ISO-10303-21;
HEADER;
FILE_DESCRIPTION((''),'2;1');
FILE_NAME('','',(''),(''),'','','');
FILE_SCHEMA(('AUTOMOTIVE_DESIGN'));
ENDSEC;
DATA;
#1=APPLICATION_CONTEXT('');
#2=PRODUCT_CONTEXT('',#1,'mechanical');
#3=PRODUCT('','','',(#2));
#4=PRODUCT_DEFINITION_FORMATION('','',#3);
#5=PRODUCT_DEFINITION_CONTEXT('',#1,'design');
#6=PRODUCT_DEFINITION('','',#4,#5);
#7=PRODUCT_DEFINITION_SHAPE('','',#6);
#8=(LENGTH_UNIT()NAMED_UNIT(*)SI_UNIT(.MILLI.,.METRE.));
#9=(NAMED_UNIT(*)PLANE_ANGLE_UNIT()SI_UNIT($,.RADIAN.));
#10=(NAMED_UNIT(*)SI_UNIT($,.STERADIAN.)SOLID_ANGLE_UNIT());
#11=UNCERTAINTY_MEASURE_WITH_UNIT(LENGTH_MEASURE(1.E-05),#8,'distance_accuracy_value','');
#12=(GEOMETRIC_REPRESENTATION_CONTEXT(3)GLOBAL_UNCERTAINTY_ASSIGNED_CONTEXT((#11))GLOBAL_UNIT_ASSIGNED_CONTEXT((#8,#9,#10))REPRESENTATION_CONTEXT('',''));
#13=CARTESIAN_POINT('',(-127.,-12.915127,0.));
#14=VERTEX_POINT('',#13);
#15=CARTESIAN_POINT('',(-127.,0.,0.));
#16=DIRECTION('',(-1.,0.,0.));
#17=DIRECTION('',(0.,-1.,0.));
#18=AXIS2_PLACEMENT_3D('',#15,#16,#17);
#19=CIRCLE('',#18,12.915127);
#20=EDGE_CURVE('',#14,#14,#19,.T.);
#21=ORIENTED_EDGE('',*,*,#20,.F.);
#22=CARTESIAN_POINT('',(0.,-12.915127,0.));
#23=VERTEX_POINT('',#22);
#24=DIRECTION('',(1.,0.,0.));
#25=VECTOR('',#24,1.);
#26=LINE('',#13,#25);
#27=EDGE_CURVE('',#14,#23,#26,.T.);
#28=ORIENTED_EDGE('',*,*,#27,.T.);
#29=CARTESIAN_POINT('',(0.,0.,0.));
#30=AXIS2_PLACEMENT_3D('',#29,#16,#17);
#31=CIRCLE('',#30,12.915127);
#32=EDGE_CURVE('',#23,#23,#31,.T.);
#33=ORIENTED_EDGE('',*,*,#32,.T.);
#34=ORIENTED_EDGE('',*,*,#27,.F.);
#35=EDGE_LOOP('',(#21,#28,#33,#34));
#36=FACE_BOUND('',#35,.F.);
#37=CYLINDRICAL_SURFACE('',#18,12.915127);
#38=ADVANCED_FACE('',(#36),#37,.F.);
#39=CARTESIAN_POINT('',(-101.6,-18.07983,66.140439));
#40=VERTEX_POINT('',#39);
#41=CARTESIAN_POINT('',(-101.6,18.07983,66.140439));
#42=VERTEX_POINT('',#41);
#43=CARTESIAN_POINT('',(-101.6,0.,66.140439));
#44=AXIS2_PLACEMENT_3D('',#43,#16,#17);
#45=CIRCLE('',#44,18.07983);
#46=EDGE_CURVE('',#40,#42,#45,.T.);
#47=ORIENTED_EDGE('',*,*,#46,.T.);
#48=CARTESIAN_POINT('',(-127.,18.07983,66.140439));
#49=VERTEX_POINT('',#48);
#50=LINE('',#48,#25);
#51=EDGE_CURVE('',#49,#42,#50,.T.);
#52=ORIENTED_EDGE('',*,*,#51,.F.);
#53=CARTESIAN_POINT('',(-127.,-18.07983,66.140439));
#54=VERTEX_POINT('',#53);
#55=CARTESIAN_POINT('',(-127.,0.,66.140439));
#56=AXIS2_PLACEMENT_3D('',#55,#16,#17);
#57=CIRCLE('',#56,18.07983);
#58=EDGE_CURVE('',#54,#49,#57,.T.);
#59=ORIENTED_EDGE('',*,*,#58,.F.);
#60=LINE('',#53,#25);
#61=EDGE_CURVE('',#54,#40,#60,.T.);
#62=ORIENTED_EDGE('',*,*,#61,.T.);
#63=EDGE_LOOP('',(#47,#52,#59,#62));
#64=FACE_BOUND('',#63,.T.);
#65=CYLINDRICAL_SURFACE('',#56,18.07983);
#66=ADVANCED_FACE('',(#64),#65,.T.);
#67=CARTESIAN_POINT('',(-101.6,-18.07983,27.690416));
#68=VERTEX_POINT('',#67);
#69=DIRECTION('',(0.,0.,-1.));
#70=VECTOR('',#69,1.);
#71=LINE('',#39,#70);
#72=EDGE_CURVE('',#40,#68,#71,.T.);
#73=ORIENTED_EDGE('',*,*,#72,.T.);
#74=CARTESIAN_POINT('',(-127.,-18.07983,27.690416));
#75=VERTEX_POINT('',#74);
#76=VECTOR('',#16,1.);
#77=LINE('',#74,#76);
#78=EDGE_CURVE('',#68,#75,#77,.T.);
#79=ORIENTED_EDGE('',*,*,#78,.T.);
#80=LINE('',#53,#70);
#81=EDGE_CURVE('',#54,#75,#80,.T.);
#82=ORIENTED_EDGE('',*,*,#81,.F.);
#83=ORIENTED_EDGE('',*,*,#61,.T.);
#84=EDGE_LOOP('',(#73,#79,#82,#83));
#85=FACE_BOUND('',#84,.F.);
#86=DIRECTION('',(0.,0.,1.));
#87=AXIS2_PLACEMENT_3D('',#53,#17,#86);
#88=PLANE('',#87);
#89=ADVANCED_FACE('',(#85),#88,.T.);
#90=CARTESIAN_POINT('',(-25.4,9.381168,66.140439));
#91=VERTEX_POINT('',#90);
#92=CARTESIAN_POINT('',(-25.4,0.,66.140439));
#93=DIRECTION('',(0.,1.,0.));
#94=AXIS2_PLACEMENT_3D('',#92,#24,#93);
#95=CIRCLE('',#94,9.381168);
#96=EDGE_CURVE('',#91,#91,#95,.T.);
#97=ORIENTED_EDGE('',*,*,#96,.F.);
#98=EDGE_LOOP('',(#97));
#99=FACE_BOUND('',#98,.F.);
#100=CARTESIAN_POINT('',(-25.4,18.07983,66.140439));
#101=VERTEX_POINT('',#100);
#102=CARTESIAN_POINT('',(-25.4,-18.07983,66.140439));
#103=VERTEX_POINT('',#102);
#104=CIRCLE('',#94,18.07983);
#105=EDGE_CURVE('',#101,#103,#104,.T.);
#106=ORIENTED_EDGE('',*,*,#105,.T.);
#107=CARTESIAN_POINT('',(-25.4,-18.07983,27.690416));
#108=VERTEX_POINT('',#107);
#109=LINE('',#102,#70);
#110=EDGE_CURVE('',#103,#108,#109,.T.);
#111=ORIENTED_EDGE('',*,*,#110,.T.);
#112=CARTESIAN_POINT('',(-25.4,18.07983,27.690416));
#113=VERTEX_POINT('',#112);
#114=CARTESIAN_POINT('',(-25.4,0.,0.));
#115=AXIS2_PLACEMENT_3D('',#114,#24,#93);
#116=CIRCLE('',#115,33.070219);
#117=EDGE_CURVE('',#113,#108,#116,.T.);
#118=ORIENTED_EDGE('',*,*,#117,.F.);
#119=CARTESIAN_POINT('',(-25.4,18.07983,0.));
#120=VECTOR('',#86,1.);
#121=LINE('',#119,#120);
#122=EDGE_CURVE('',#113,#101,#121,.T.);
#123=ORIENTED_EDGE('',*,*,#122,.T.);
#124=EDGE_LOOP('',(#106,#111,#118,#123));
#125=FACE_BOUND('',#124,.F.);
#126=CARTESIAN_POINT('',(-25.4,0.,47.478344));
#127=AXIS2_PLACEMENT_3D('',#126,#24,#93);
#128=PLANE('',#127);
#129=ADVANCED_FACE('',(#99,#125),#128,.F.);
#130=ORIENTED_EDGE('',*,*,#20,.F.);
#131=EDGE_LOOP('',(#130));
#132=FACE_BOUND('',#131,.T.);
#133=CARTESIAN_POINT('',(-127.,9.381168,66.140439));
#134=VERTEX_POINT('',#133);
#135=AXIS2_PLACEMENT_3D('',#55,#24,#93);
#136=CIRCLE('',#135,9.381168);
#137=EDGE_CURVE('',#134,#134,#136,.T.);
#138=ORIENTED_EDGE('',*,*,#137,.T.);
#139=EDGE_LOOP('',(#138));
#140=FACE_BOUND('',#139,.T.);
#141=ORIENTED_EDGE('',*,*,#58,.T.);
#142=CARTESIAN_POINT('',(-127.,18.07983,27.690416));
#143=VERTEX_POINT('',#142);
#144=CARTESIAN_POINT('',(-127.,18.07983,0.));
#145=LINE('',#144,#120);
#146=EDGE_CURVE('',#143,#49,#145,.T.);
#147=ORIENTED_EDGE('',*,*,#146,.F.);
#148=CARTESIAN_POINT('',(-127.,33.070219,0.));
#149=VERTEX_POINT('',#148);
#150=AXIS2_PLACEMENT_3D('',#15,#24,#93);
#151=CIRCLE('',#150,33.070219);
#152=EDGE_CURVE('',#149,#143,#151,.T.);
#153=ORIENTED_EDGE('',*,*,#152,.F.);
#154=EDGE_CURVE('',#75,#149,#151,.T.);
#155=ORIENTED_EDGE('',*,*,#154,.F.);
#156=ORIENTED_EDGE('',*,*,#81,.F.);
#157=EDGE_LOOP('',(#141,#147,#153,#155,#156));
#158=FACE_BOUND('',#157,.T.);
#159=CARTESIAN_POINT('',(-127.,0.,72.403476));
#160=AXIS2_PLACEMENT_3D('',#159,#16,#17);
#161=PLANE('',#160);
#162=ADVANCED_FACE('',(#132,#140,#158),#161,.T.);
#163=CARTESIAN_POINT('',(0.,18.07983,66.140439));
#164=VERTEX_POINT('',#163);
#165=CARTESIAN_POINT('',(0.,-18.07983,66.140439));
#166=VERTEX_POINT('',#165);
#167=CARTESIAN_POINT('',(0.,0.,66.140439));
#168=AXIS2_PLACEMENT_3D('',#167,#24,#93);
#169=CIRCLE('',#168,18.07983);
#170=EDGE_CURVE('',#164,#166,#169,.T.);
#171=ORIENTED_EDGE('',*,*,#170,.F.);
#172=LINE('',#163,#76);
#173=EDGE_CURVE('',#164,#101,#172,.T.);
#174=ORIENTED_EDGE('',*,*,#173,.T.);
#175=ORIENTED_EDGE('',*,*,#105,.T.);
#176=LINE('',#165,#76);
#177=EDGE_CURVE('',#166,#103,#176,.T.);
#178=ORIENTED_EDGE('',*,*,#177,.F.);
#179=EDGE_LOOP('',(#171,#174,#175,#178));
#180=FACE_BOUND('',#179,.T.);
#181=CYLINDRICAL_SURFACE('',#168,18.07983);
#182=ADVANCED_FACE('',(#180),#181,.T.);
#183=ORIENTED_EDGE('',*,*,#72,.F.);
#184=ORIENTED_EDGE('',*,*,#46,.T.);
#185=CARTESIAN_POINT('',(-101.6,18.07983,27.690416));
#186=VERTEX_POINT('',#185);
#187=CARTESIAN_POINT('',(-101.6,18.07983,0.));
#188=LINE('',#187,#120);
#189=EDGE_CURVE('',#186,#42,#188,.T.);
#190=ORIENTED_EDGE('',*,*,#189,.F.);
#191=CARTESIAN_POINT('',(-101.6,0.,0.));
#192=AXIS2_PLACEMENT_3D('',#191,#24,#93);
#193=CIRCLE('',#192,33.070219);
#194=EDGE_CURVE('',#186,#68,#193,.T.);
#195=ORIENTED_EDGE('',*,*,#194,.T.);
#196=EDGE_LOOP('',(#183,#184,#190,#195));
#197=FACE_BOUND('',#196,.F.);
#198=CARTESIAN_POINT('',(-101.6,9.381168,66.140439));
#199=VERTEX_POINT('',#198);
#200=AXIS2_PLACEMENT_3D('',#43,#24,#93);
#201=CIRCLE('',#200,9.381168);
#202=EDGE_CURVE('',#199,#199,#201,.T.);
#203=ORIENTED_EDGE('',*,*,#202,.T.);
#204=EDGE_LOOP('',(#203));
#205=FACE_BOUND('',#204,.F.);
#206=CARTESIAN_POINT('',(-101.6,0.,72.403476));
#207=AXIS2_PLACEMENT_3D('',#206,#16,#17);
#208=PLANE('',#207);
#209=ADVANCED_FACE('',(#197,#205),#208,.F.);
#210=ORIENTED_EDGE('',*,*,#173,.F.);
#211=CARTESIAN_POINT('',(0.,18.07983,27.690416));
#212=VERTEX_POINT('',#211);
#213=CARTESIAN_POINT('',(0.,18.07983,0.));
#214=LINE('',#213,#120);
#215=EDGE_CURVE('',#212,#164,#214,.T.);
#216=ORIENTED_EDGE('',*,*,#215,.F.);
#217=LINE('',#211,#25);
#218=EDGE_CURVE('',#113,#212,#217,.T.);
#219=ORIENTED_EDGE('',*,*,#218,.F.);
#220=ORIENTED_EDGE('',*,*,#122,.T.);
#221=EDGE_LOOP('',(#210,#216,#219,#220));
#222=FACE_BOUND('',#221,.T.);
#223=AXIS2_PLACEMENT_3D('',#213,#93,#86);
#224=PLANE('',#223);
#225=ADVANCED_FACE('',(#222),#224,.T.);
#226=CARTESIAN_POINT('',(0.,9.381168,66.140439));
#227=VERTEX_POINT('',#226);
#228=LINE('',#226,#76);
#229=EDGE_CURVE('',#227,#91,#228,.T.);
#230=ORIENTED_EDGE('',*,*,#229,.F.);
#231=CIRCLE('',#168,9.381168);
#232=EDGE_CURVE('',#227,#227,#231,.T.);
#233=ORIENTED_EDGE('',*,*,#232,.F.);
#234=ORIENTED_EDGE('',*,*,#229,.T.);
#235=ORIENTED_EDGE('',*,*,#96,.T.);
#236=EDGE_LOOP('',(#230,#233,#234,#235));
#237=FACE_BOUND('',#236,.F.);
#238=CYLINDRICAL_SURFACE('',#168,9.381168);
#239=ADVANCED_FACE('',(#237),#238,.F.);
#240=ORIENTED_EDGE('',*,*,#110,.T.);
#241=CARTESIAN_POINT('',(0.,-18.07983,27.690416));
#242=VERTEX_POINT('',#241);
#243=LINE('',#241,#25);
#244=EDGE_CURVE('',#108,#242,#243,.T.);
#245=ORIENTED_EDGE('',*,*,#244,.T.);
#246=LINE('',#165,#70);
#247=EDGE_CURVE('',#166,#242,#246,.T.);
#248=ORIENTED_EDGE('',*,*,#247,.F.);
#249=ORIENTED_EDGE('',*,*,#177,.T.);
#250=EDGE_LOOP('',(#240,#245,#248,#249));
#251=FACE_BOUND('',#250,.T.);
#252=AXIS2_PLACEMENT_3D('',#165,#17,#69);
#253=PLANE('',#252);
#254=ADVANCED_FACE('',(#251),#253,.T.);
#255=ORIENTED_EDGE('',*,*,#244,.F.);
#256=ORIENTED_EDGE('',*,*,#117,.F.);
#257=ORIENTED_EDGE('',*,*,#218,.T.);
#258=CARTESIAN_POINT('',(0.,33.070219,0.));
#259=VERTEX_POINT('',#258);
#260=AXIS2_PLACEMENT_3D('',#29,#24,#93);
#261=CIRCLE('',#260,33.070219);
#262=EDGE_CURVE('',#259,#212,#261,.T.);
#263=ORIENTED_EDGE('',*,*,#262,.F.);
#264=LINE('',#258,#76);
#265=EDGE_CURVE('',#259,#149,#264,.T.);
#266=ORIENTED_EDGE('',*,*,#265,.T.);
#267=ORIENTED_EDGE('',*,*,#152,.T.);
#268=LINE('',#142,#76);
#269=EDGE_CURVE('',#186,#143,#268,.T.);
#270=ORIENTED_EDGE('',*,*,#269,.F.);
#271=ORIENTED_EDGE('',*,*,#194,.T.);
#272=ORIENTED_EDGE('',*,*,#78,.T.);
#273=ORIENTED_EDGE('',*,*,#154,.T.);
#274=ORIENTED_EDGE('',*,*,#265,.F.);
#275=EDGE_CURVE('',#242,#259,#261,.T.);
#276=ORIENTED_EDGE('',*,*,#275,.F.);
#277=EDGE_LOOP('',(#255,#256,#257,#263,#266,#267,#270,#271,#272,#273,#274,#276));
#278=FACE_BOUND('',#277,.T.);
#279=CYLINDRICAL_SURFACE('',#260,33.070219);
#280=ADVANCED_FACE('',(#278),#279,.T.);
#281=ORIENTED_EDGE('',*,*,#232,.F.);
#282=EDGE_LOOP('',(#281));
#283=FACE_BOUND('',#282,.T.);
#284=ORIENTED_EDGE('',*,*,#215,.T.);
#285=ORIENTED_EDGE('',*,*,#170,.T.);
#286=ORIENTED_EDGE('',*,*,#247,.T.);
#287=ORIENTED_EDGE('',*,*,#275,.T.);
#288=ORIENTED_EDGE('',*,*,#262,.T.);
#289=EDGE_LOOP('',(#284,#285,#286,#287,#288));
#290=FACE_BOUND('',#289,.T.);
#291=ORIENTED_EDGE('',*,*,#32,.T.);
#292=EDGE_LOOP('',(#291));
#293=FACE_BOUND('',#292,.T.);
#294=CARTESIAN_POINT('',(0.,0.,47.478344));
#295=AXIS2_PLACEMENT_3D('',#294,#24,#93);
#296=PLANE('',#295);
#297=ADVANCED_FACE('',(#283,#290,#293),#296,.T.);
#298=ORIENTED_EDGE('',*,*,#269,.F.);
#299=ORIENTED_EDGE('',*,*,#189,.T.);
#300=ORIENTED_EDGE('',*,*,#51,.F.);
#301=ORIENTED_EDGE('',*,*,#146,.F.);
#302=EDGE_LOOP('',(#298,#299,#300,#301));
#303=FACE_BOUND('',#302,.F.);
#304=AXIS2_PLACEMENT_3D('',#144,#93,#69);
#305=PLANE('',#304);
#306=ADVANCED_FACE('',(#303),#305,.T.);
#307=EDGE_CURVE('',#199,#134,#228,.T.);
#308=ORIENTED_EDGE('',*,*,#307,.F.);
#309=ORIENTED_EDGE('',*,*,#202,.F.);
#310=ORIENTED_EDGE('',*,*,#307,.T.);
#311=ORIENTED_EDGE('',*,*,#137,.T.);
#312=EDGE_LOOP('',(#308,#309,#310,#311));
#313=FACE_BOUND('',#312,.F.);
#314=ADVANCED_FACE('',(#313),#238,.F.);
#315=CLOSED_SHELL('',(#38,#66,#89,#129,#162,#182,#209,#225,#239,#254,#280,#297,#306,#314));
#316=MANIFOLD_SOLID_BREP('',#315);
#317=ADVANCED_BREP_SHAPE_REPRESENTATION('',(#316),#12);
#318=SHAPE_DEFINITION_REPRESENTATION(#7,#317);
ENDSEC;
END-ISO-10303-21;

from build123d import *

# Parameters (mm, degrees)
F0_R      = 33.0702193876
F1_DEPTH  = 63.5
F3_DEPTH  = 25.4
F7_DEPTH  = 25.4
F8_DEPTH  = 25.4
F9_R      = 12.915127355
F10_DEPTH = 127.001
F11_R     = 9.381167956
F12_DEPTH = 127.001


with BuildPart() as f1:
    # F0 (on Right) → F1 (new body)
    with BuildSketch(Plane.YZ):
        Circle(F0_R)
    extrude(amount=-F1_DEPTH)

    # F2 (on face) → F3 (join)
    with BuildSketch(Plane.YZ):
        with BuildLine():
            Line((-18.0798303336, 66.1404387753), (-18.0798303336, 27.69041613))
            ThreePointArc((-18.0798303336, 27.69041613), (0, 33.0702193876), (18.0798303336, 27.69041613))
            Line((18.0798303336, 27.69041613), (18.0798303336, 66.1404387753))
            Line((18.0798303336, 66.1404387753), (-18.0798303336, 66.1404387753))
        make_face()
        with BuildLine():
            Line((-18.0798303336, 27.69041613), (-18.0798303336, 0))
            Line((-18.0798303336, 0), (18.0798303336, 0))
            Line((18.0798303336, 0), (18.0798303336, 27.69041613))
            ThreePointArc((18.0798303336, 27.69041613), (0, 33.0702193876), (-18.0798303336, 27.69041613))
        make_face()
    extrude(amount=-F3_DEPTH)

    # F4: F1 across face


with BuildPart() as f1_1:
    add(f1.part)
    add(f1.part.mirror(Plane(origin=(-63.5, 0, 0), x_dir=(0, 1, 0), z_dir=(-1, 0, 0))))

    # F5 (on face) → F7 (join)
    with BuildSketch(Plane.YZ):
        with BuildLine():
            ThreePointArc((-18.0798303336, 66.1404387753), (0, 48.0606084417), (18.0798303336, 66.1404387753))
            Line((18.0798303336, 66.1404387753), (-18.0798303336, 66.1404387753))
        make_face()
        with BuildLine():
            Line((-18.0798303336, 66.1404387753), (18.0798303336, 66.1404387753))
            ThreePointArc((18.0798303336, 66.1404387753), (0, 84.2202691088), (-18.0798303336, 66.1404387753))
        make_face()
    extrude(amount=-F7_DEPTH)

    # F6 (on face) → F8 (join)
    with BuildSketch(Plane(origin=(-127, 0, 0), x_dir=(0, -1, 0), z_dir=(-1, 0, 0))):
        with BuildLine():
            Line((-18.0798303336, 66.1404387753), (18.0798303336, 66.1404387753))
            ThreePointArc((18.0798303336, 66.1404387753), (0, 84.2202691088), (-18.0798303336, 66.1404387753))
        make_face()
    extrude(amount=-F8_DEPTH)

    # F9 (on face) → F10 (cut, through all)
    with BuildSketch(Plane(origin=(-127, 0, 0), x_dir=(0, -1, 0), z_dir=(-1, 0, 0))):
        Circle(F9_R)
    extrude(amount=-F10_DEPTH, mode=Mode.SUBTRACT)

    # F11 (on face) → F12 (cut, through all)
    with BuildSketch(Plane.YZ):
        with Locations((0, 66.1404387753)):
            Circle(F11_R)
    extrude(amount=-F12_DEPTH, mode=Mode.SUBTRACT)


solid = f1_1.part
